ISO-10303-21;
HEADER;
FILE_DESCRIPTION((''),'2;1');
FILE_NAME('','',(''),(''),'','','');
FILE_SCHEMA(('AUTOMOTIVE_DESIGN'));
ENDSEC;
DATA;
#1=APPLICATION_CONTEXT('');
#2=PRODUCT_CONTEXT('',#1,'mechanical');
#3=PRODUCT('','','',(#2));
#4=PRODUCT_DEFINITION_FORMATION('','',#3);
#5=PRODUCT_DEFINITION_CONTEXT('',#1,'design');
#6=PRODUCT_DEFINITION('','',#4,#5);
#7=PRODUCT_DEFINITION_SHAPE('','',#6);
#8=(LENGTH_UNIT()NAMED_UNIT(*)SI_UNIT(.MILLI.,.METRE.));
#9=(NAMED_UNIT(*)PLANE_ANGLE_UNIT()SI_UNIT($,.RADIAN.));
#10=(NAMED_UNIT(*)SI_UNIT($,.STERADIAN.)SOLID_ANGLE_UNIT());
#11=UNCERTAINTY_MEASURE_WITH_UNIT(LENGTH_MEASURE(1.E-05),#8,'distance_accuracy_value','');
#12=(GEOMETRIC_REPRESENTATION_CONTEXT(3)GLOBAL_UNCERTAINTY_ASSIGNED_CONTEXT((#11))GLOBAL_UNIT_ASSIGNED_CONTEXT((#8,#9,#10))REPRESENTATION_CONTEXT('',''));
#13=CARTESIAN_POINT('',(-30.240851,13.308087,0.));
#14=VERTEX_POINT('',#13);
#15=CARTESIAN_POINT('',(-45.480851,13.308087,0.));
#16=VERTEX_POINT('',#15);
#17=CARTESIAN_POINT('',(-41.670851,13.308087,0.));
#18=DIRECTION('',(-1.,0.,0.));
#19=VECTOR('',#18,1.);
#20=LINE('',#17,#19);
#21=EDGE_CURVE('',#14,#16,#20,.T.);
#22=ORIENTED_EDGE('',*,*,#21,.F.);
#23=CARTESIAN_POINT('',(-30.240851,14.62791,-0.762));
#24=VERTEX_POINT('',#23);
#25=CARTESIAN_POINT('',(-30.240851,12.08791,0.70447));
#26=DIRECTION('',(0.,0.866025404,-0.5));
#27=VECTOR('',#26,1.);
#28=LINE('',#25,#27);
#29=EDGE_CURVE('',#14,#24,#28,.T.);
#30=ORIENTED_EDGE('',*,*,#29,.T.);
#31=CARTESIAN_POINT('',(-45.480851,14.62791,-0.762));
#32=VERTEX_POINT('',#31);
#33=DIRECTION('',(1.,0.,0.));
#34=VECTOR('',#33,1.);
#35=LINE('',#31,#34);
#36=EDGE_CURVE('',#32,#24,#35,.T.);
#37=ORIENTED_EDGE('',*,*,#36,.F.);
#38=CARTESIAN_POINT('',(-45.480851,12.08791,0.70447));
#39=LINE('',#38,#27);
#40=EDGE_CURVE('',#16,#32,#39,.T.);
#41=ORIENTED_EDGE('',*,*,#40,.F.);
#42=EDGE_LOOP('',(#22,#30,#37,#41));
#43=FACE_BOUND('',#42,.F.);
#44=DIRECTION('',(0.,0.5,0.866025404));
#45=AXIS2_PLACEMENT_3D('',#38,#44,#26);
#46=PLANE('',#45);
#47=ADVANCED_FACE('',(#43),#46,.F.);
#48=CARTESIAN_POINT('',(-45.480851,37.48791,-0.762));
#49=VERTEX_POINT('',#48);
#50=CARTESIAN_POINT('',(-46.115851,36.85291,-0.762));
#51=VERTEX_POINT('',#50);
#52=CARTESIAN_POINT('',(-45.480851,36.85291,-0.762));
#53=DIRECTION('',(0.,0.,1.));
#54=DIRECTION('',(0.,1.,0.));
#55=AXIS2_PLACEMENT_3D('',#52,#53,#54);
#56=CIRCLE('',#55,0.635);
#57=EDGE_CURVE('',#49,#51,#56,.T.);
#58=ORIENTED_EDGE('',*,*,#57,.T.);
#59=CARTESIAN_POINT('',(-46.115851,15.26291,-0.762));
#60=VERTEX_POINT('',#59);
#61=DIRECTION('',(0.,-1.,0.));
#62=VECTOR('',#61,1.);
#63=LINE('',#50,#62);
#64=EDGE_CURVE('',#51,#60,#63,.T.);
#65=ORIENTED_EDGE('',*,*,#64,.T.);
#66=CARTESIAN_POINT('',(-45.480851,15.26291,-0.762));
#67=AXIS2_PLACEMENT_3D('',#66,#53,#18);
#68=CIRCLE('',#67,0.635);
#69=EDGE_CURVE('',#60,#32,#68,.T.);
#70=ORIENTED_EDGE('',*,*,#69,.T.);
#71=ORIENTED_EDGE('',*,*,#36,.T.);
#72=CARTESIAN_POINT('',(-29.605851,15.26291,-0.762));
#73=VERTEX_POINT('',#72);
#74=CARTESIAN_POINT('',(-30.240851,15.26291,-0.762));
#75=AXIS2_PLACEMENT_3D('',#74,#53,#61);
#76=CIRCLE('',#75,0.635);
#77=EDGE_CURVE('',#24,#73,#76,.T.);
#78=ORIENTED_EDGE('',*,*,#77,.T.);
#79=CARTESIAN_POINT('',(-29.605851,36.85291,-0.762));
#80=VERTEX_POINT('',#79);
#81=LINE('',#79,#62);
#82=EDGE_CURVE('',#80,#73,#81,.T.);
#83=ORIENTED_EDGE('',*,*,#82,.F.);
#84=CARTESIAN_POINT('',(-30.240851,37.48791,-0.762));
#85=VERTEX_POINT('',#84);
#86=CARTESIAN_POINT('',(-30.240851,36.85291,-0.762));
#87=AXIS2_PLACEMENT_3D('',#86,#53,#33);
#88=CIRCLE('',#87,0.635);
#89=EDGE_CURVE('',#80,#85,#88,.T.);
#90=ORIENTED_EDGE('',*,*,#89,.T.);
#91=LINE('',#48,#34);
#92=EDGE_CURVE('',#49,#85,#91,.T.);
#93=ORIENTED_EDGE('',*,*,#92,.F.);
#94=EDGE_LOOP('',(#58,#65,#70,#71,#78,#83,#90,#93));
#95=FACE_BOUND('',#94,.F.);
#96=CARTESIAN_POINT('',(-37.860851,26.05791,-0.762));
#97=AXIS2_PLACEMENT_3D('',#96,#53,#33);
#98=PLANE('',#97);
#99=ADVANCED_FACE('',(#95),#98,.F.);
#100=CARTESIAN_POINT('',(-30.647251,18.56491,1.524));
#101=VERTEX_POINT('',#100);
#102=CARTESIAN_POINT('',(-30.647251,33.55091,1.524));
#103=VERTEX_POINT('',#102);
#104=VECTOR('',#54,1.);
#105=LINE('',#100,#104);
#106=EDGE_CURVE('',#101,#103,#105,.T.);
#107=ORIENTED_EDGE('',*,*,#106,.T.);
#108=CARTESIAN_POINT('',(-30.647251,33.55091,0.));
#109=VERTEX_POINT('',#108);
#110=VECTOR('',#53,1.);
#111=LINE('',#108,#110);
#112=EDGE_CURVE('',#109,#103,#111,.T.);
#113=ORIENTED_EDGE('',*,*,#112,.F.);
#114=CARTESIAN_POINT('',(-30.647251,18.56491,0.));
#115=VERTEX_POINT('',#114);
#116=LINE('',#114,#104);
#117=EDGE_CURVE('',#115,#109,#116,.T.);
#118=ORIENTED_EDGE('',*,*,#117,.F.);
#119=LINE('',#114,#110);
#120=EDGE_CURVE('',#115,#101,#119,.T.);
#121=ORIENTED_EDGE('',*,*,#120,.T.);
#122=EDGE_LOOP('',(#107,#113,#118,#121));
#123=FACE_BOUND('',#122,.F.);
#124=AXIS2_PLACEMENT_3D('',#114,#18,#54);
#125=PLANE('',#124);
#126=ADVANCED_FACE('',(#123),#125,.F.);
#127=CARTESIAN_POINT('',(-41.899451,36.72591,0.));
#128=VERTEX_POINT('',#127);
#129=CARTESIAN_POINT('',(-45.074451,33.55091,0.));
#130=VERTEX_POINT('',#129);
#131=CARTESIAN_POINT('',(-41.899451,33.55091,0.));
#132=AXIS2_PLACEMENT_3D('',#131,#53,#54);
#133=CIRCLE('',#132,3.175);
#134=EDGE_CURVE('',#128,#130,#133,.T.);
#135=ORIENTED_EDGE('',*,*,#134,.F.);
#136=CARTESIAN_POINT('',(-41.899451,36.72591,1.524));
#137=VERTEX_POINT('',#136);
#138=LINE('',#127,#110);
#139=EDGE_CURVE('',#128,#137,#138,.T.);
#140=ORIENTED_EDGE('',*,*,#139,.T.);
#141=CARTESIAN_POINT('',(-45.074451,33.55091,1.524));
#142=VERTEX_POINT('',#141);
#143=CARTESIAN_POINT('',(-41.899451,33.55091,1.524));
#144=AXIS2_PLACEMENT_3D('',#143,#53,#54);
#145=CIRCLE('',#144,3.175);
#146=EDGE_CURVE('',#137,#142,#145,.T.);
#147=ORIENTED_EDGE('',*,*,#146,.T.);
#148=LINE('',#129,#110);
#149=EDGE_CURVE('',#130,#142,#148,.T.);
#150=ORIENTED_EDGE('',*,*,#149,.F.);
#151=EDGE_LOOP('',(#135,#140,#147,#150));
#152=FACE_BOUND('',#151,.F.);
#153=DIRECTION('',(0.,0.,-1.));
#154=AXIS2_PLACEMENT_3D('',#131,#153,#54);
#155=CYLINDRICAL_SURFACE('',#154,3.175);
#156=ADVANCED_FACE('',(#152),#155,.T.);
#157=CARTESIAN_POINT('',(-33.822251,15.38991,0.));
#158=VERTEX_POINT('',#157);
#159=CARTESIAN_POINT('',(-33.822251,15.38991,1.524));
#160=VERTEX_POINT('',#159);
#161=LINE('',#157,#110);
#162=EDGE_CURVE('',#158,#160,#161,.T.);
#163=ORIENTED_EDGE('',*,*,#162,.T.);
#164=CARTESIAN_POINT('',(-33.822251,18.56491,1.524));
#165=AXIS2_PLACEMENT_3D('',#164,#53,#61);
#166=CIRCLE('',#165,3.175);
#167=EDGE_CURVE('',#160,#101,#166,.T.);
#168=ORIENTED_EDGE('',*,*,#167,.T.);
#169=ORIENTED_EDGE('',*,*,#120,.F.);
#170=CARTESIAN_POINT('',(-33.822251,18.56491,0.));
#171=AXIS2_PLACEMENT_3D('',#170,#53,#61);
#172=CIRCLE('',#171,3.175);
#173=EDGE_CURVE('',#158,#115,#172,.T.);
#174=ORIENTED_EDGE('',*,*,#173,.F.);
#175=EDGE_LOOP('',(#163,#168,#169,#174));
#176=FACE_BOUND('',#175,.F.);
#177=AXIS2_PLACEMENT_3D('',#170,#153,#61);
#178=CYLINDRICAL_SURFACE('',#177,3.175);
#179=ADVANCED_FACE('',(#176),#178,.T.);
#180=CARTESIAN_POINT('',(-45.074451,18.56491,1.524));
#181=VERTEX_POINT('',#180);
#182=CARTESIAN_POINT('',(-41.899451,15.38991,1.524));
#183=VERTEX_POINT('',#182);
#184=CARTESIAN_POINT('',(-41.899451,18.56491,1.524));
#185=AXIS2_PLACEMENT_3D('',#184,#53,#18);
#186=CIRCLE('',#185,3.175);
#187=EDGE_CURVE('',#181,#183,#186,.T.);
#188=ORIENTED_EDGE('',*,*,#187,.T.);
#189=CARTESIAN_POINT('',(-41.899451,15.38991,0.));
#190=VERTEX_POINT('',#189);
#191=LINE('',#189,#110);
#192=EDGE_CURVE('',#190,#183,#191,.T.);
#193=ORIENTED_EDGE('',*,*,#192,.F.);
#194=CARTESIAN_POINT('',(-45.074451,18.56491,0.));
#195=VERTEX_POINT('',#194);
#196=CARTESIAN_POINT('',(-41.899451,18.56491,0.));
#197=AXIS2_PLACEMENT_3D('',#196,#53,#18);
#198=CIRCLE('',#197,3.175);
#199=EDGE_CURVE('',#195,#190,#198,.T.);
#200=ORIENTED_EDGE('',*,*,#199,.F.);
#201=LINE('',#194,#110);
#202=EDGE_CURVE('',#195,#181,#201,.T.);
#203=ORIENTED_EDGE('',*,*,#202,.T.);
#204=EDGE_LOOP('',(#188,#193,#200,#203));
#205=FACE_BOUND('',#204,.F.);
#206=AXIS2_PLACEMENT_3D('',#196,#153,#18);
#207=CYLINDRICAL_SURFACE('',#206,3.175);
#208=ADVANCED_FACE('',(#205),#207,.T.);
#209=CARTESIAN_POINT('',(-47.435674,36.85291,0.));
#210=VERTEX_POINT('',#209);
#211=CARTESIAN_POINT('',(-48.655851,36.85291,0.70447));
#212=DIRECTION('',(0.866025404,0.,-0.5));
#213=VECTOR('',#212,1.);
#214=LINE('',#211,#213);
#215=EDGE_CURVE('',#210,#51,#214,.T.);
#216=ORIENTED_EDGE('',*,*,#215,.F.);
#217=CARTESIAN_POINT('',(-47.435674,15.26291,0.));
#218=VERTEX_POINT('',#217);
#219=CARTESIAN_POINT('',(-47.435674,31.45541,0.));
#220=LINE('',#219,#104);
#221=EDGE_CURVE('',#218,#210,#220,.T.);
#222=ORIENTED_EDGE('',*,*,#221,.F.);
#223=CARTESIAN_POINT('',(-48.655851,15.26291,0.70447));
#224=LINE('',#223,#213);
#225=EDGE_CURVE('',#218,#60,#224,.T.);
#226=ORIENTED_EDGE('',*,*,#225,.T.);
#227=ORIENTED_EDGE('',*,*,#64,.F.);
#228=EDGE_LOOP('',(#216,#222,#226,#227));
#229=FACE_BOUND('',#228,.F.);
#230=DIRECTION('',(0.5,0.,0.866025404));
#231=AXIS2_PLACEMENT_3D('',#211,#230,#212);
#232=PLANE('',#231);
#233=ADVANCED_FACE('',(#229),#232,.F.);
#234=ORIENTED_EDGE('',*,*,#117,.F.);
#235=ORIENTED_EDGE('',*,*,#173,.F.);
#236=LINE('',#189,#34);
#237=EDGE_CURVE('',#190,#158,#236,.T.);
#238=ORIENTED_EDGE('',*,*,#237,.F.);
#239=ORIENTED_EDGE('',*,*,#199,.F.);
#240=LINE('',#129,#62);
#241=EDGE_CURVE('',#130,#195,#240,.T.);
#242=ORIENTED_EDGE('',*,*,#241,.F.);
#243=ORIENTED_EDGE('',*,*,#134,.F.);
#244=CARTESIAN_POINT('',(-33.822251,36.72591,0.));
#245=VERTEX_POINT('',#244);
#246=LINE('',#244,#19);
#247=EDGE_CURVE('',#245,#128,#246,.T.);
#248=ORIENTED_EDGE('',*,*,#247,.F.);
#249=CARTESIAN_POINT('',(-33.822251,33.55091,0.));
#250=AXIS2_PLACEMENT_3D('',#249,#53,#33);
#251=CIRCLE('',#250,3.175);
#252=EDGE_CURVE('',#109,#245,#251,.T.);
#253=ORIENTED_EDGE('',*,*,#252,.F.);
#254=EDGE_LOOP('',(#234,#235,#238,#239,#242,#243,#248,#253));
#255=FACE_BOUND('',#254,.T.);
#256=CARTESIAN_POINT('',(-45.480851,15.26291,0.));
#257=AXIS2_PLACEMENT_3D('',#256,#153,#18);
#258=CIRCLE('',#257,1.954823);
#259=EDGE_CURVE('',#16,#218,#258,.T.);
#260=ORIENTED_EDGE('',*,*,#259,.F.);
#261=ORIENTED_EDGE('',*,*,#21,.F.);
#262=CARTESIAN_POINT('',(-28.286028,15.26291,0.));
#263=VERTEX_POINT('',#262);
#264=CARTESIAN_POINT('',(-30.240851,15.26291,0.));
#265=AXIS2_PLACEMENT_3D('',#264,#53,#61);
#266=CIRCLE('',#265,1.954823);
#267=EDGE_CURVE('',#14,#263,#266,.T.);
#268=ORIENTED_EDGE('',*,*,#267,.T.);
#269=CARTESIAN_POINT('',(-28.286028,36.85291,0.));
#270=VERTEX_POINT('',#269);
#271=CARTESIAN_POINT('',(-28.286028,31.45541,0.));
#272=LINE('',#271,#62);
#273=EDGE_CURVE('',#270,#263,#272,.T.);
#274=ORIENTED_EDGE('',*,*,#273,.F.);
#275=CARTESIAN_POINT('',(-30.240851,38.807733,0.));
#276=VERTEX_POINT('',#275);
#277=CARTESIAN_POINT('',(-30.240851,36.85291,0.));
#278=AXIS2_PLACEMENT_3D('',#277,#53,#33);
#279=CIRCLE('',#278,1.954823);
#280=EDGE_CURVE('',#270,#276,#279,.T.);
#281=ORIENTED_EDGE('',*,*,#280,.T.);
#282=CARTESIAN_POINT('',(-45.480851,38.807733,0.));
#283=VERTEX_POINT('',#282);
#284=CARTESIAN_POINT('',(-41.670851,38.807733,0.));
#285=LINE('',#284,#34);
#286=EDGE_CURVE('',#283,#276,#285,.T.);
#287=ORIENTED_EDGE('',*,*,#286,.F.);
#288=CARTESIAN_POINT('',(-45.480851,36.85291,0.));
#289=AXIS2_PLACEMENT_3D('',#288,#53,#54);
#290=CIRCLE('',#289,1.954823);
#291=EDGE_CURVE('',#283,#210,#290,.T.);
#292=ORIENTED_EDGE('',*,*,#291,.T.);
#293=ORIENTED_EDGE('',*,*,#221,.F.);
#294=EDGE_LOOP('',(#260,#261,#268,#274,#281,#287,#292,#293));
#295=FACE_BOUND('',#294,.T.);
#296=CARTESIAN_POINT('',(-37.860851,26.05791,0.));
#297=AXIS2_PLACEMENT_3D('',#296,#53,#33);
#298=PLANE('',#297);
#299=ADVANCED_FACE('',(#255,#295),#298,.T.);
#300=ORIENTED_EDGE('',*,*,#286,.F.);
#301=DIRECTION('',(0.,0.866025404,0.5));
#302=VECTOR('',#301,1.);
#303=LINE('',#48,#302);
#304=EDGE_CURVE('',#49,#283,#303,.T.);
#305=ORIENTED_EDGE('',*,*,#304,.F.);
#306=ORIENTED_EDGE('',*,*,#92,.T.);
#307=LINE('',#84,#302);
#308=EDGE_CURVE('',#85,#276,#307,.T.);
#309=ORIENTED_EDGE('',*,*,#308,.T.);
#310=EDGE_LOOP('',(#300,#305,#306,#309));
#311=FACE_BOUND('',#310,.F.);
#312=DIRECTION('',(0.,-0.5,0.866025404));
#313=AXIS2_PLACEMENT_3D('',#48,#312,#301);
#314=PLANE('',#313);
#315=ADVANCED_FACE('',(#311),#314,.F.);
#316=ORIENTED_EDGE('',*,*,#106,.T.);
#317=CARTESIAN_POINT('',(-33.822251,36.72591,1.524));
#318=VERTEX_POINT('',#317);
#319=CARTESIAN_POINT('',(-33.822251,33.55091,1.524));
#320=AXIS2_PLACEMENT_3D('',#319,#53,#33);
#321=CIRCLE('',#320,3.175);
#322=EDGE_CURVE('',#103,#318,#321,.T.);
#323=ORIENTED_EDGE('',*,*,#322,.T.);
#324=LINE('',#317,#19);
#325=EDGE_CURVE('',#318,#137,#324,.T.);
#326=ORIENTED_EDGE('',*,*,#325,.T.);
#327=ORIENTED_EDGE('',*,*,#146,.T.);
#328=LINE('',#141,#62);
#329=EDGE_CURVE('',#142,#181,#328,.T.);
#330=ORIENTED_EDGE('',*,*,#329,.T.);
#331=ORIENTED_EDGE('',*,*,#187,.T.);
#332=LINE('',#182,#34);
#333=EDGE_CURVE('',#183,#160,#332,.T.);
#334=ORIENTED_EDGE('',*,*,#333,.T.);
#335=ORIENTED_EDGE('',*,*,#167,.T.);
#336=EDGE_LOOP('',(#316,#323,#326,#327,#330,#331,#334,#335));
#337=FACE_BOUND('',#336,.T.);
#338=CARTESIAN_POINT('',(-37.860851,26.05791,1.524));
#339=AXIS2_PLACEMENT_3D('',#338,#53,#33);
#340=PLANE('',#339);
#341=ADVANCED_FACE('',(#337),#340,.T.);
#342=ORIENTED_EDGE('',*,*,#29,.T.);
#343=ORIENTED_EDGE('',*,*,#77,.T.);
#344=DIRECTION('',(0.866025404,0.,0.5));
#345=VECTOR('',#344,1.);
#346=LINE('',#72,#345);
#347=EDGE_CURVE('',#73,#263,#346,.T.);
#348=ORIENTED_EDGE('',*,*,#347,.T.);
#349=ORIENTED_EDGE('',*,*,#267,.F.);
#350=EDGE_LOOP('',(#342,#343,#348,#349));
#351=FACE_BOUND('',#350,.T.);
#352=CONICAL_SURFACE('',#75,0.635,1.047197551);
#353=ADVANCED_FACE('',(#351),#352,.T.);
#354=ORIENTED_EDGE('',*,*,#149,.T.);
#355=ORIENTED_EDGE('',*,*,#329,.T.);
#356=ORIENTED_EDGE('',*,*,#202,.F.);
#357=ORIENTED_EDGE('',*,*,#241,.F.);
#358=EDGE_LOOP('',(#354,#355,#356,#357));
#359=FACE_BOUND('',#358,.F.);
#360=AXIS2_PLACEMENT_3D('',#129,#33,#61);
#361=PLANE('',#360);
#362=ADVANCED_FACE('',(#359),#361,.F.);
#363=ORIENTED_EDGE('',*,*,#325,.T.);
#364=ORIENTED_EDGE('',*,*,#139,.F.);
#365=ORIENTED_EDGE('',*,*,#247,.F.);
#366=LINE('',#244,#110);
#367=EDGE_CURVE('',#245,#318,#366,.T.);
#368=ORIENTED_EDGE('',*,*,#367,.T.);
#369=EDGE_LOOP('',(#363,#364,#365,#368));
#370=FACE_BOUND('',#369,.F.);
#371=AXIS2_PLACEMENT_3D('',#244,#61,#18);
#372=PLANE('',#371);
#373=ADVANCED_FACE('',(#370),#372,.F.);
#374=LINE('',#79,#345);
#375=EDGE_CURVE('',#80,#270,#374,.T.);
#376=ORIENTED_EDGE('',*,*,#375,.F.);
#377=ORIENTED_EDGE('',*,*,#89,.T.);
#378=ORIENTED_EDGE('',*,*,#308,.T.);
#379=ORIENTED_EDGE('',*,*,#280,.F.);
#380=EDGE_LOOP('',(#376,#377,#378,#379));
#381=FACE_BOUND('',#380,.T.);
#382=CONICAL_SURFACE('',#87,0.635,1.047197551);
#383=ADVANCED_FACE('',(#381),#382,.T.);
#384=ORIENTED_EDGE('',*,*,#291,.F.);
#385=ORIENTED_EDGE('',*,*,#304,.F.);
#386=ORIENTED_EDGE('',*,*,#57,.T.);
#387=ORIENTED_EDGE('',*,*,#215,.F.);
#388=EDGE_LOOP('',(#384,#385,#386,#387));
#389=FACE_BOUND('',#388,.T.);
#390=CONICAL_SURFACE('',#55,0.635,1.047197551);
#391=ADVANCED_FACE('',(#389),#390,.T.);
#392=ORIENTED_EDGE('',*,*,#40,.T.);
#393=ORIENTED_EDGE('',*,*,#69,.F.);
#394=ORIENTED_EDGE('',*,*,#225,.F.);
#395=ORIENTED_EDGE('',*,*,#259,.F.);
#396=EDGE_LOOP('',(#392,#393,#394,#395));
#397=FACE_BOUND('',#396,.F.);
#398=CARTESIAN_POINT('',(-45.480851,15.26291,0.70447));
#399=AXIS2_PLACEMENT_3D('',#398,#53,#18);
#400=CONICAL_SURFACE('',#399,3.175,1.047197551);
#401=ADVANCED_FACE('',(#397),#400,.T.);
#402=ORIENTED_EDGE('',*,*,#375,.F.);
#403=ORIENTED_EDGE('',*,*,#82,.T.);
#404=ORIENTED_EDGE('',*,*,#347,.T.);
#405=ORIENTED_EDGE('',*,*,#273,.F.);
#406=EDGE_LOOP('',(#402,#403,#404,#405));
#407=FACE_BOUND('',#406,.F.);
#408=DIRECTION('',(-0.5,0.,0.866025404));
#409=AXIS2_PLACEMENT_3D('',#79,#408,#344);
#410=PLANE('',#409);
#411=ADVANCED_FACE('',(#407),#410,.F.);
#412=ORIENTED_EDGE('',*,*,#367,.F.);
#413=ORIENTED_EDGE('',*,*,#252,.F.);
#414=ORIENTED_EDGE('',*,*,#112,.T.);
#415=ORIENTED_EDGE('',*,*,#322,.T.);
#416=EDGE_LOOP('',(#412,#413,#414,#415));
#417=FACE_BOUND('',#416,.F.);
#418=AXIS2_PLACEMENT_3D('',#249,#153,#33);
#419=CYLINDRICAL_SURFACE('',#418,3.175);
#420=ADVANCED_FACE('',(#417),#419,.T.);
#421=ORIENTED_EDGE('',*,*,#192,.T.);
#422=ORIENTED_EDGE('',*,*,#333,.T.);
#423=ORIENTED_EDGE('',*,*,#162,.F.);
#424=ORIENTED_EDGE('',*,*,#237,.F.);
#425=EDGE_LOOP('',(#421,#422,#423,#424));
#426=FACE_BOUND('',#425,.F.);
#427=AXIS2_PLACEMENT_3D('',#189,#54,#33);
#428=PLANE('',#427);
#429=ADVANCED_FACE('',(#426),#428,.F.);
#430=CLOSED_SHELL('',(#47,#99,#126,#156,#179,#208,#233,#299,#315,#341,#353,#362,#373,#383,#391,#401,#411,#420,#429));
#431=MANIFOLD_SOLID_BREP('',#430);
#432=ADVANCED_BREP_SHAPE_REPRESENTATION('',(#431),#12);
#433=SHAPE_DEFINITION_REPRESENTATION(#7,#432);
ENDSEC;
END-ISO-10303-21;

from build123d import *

# Parameters (mm, degrees)
F2_DEPTH     = 1.524
F3_DEPTH     = 0.762
F4_T1_DEPTH  = 21.59
F4_T3_DEPTH  = 15.24
F4_T6_ANGLE  = 90
F4_T8_ANGLE  = 90
F4_T10_ANGLE = 90
F4_T12_ANGLE = 90


# Not quite as in the source:
# - a fillet or chamfer that OpenCascade refuses, or shapes differently, is made with other operations: its cross-section is extruded or revolved along the edge and cut away or added


with BuildPart() as f2:
    # F1 (on face) → F2 (new body)
    with BuildSketch(Plane.XY):
        with BuildLine():
            ThreePointArc((-45.0744511747, 18.5649100114), (-44.144515205, 16.3198459811), (-41.8994511747, 15.3899100114))
            Line((-41.8994511747, 15.3899100114), (-33.8222511747, 15.3899100114))
            ThreePointArc((-33.8222511747, 15.3899100114), (-31.5771871445, 16.3198459811), (-30.6472511747, 18.5649100114))
            Line((-30.6472511747, 18.5649100114), (-30.6472511747, 33.5509100114))
            ThreePointArc((-30.6472511747, 33.5509100114), (-31.5771871445, 35.7959740417), (-33.8222511747, 36.7259100114))
            Line((-33.8222511747, 36.7259100114), (-41.8994511747, 36.7259100114))
            ThreePointArc((-41.8994511747, 36.7259100114), (-44.144515205, 35.7959740417), (-45.0744511747, 33.5509100114))
            Line((-45.0744511747, 33.5509100114), (-45.0744511747, 18.5649100114))
        make_face()
    extrude(amount=F2_DEPTH)

    # F0 (on Top) → F3 (join)
    with BuildSketch(Plane.XY):
        with BuildLine():
            ThreePointArc((-48.6558511747, 15.2629100114), (-47.725915205, 13.0178459811), (-45.4808511747, 12.0879100114))
            Line((-45.4808511747, 12.0879100114), (-30.2408511747, 12.0879100114))
            ThreePointArc((-30.2408511747, 12.0879100114), (-27.9957871445, 13.0178459811), (-27.0658511747, 15.2629100114))
            Line((-27.0658511747, 15.2629100114), (-27.0658511747, 36.8529100114))
            ThreePointArc((-27.0658511747, 36.8529100114), (-27.9957871445, 39.0979740417), (-30.2408511747, 40.0279100114))
            Line((-30.2408511747, 40.0279100114), (-45.4808511747, 40.0279100114))
            ThreePointArc((-45.4808511747, 40.0279100114), (-47.725915205, 39.0979740417), (-48.6558511747, 36.8529100114))
            Line((-48.6558511747, 36.8529100114), (-48.6558511747, 15.2629100114))
        make_face()
    extrude(amount=-F3_DEPTH)

    # F4: chamfer of 2.54 x 1.4664696837 on 8 edges, made by hand

    # F4_s2 → F4_t1 (cut)
    with BuildSketch(Plane.XZ.offset(-36.8529100114)):
        Polygon((-48.6558511747, 0.7044696837), (-46.1158511747, -0.762), (-48.6558511747, -0.762), align=None)
        Polygon((-29.6058511747, -0.762), (-27.0658511747, 0.7044696837), (-27.0658511747, -0.762), align=None)
    extrude(amount=F4_T1_DEPTH, mode=Mode.SUBTRACT)

    # F4_s4 → F4_t3 (cut)
    with BuildSketch(Plane.YZ.offset(-45.4808511747)):
        Polygon((37.4879100114, -0.762), (40.0279100114, 0.7044696837), (40.0279100114, -0.762), align=None)
        Polygon((12.0879100114, 0.7044696837), (14.6279100114, -0.762), (12.0879100114, -0.762), align=None)
    extrude(amount=F4_T3_DEPTH, mode=Mode.SUBTRACT)

    # F4_s5 → F4_t6 (revolve, cut)
    with BuildSketch(Plane.YZ.offset(-45.4808511747)):
        Polygon((37.4879100114, -0.762), (40.0279100114, 0.7044696837), (40.0279100114, -0.762), align=None)
    revolve(axis=Axis((-45.4808511747, 36.8529100114, -0.762), (0, 0, 1)), revolution_arc=F4_T6_ANGLE, mode=Mode.SUBTRACT)

    # F4_s7 → F4_t8 (revolve, cut)
    with BuildSketch(Plane.XZ.offset(-36.8529100114)):
        Polygon((-29.6058511747, -0.762), (-27.0658511747, 0.7044696837), (-27.0658511747, -0.762), align=None)
    revolve(axis=Axis((-30.2408511747, 36.8529100114, -0.762), (0, 0, 1)), revolution_arc=F4_T8_ANGLE, mode=Mode.SUBTRACT)

    # F4_s9 → F4_t10 (revolve, cut)
    with BuildSketch(Plane.YZ.offset(-30.2408511747)):
        Polygon((14.6279100114, -0.762), (12.0879100114, 0.7044696837), (12.0879100114, -0.762), align=None)
    revolve(axis=Axis((-30.2408511747, 15.2629100114, -0.762), (0, 0, 1)), revolution_arc=F4_T10_ANGLE, mode=Mode.SUBTRACT)

    # F4_s11 → F4_t12 (revolve, cut)
    with BuildSketch(Plane.XZ.offset(-15.2629100114)):
        Polygon((-48.6558511747, 0.7044696837), (-46.1158511747, -0.762), (-48.6558511747, -0.762), align=None)
    revolve(axis=Axis((-45.4808511747, 15.2629100114, -0.762), (0, 0, 1)), revolution_arc=F4_T12_ANGLE, mode=Mode.SUBTRACT)


solid = f2.part
